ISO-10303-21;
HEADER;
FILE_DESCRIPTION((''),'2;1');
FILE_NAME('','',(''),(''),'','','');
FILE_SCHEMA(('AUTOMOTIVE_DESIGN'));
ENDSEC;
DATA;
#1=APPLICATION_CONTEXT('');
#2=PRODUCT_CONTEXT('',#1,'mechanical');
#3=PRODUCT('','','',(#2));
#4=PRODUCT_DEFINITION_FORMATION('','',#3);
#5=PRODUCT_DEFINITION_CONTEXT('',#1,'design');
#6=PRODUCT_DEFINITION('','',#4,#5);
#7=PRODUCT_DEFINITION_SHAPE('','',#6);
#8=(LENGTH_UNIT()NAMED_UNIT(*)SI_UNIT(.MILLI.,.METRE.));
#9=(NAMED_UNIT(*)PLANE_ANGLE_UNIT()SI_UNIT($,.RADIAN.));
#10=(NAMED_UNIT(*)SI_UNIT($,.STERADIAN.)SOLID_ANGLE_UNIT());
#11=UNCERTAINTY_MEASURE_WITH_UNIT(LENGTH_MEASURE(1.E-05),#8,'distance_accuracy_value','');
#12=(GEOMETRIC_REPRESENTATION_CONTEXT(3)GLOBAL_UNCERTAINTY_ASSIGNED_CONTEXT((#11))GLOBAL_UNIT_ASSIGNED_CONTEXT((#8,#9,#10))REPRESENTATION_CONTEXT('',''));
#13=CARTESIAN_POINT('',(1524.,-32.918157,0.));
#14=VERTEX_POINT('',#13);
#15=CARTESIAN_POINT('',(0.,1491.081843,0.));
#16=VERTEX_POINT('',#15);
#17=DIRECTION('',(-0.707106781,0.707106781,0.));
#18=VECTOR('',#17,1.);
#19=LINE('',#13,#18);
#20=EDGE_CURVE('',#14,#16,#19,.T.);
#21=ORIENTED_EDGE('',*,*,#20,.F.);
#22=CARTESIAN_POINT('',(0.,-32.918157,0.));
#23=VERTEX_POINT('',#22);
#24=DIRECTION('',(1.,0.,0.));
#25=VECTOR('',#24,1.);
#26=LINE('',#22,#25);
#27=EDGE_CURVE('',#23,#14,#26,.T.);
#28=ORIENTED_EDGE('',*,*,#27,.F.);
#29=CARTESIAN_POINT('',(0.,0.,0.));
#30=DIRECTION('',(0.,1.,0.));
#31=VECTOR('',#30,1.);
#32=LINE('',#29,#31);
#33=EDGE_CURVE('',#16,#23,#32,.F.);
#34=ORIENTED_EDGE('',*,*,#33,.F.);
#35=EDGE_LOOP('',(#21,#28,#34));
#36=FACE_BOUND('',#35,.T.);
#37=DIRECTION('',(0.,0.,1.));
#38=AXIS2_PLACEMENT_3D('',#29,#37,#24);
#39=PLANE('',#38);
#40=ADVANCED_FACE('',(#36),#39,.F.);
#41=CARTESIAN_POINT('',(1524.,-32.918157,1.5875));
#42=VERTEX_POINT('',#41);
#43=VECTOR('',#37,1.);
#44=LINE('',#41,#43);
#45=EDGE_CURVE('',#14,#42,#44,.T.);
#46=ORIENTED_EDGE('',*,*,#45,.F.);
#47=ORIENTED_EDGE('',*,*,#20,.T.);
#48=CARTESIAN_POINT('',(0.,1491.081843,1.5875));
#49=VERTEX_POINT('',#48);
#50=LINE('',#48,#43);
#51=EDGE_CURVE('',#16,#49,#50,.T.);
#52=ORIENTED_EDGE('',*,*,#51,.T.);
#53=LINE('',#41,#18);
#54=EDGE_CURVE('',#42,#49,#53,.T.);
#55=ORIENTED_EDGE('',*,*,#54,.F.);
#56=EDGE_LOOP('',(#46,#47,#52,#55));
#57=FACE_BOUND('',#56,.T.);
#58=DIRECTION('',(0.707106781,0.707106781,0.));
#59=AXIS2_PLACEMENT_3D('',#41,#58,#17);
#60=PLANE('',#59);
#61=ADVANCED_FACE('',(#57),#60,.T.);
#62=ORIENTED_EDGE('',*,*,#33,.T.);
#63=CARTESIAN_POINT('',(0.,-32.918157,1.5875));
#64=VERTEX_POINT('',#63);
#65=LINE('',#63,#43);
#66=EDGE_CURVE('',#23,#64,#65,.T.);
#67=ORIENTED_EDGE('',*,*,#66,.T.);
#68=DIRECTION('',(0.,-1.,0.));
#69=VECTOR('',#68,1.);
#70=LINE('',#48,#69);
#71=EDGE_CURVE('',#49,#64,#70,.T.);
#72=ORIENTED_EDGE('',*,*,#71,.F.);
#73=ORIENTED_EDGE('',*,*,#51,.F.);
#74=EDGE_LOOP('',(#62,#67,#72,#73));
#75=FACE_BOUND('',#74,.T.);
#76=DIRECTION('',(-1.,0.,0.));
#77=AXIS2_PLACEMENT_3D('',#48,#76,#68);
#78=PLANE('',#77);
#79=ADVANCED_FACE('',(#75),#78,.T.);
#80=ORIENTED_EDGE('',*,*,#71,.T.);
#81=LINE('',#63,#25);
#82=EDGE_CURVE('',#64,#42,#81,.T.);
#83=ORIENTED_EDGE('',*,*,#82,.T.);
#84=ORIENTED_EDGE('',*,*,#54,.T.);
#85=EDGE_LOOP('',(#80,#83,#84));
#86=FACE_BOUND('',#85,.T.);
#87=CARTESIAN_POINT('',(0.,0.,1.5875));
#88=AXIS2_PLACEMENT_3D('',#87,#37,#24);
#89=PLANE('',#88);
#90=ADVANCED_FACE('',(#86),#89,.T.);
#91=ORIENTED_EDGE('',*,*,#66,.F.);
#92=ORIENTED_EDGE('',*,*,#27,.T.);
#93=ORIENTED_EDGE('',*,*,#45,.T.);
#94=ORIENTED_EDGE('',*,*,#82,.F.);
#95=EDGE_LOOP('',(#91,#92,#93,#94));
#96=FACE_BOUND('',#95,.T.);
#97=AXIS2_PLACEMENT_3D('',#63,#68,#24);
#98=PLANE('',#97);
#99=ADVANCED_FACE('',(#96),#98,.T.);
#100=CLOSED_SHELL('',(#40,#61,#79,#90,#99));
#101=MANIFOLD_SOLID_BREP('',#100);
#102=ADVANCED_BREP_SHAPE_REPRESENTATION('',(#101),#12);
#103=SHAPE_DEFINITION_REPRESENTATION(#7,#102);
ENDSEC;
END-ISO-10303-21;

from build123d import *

# Parameters (mm, degrees)
BOSS_EXTRUDE1_DEPTH = 1.5875


with BuildPart() as part:
    # Sketch1 → Boss-Extrude1 (new body)
    with BuildSketch(Plane.XY):
        Polygon((0, 1491.081843199), (0, -32.918156801), (1524, -32.918156801), align=None)
    extrude(amount=BOSS_EXTRUDE1_DEPTH)


solid = part.part
